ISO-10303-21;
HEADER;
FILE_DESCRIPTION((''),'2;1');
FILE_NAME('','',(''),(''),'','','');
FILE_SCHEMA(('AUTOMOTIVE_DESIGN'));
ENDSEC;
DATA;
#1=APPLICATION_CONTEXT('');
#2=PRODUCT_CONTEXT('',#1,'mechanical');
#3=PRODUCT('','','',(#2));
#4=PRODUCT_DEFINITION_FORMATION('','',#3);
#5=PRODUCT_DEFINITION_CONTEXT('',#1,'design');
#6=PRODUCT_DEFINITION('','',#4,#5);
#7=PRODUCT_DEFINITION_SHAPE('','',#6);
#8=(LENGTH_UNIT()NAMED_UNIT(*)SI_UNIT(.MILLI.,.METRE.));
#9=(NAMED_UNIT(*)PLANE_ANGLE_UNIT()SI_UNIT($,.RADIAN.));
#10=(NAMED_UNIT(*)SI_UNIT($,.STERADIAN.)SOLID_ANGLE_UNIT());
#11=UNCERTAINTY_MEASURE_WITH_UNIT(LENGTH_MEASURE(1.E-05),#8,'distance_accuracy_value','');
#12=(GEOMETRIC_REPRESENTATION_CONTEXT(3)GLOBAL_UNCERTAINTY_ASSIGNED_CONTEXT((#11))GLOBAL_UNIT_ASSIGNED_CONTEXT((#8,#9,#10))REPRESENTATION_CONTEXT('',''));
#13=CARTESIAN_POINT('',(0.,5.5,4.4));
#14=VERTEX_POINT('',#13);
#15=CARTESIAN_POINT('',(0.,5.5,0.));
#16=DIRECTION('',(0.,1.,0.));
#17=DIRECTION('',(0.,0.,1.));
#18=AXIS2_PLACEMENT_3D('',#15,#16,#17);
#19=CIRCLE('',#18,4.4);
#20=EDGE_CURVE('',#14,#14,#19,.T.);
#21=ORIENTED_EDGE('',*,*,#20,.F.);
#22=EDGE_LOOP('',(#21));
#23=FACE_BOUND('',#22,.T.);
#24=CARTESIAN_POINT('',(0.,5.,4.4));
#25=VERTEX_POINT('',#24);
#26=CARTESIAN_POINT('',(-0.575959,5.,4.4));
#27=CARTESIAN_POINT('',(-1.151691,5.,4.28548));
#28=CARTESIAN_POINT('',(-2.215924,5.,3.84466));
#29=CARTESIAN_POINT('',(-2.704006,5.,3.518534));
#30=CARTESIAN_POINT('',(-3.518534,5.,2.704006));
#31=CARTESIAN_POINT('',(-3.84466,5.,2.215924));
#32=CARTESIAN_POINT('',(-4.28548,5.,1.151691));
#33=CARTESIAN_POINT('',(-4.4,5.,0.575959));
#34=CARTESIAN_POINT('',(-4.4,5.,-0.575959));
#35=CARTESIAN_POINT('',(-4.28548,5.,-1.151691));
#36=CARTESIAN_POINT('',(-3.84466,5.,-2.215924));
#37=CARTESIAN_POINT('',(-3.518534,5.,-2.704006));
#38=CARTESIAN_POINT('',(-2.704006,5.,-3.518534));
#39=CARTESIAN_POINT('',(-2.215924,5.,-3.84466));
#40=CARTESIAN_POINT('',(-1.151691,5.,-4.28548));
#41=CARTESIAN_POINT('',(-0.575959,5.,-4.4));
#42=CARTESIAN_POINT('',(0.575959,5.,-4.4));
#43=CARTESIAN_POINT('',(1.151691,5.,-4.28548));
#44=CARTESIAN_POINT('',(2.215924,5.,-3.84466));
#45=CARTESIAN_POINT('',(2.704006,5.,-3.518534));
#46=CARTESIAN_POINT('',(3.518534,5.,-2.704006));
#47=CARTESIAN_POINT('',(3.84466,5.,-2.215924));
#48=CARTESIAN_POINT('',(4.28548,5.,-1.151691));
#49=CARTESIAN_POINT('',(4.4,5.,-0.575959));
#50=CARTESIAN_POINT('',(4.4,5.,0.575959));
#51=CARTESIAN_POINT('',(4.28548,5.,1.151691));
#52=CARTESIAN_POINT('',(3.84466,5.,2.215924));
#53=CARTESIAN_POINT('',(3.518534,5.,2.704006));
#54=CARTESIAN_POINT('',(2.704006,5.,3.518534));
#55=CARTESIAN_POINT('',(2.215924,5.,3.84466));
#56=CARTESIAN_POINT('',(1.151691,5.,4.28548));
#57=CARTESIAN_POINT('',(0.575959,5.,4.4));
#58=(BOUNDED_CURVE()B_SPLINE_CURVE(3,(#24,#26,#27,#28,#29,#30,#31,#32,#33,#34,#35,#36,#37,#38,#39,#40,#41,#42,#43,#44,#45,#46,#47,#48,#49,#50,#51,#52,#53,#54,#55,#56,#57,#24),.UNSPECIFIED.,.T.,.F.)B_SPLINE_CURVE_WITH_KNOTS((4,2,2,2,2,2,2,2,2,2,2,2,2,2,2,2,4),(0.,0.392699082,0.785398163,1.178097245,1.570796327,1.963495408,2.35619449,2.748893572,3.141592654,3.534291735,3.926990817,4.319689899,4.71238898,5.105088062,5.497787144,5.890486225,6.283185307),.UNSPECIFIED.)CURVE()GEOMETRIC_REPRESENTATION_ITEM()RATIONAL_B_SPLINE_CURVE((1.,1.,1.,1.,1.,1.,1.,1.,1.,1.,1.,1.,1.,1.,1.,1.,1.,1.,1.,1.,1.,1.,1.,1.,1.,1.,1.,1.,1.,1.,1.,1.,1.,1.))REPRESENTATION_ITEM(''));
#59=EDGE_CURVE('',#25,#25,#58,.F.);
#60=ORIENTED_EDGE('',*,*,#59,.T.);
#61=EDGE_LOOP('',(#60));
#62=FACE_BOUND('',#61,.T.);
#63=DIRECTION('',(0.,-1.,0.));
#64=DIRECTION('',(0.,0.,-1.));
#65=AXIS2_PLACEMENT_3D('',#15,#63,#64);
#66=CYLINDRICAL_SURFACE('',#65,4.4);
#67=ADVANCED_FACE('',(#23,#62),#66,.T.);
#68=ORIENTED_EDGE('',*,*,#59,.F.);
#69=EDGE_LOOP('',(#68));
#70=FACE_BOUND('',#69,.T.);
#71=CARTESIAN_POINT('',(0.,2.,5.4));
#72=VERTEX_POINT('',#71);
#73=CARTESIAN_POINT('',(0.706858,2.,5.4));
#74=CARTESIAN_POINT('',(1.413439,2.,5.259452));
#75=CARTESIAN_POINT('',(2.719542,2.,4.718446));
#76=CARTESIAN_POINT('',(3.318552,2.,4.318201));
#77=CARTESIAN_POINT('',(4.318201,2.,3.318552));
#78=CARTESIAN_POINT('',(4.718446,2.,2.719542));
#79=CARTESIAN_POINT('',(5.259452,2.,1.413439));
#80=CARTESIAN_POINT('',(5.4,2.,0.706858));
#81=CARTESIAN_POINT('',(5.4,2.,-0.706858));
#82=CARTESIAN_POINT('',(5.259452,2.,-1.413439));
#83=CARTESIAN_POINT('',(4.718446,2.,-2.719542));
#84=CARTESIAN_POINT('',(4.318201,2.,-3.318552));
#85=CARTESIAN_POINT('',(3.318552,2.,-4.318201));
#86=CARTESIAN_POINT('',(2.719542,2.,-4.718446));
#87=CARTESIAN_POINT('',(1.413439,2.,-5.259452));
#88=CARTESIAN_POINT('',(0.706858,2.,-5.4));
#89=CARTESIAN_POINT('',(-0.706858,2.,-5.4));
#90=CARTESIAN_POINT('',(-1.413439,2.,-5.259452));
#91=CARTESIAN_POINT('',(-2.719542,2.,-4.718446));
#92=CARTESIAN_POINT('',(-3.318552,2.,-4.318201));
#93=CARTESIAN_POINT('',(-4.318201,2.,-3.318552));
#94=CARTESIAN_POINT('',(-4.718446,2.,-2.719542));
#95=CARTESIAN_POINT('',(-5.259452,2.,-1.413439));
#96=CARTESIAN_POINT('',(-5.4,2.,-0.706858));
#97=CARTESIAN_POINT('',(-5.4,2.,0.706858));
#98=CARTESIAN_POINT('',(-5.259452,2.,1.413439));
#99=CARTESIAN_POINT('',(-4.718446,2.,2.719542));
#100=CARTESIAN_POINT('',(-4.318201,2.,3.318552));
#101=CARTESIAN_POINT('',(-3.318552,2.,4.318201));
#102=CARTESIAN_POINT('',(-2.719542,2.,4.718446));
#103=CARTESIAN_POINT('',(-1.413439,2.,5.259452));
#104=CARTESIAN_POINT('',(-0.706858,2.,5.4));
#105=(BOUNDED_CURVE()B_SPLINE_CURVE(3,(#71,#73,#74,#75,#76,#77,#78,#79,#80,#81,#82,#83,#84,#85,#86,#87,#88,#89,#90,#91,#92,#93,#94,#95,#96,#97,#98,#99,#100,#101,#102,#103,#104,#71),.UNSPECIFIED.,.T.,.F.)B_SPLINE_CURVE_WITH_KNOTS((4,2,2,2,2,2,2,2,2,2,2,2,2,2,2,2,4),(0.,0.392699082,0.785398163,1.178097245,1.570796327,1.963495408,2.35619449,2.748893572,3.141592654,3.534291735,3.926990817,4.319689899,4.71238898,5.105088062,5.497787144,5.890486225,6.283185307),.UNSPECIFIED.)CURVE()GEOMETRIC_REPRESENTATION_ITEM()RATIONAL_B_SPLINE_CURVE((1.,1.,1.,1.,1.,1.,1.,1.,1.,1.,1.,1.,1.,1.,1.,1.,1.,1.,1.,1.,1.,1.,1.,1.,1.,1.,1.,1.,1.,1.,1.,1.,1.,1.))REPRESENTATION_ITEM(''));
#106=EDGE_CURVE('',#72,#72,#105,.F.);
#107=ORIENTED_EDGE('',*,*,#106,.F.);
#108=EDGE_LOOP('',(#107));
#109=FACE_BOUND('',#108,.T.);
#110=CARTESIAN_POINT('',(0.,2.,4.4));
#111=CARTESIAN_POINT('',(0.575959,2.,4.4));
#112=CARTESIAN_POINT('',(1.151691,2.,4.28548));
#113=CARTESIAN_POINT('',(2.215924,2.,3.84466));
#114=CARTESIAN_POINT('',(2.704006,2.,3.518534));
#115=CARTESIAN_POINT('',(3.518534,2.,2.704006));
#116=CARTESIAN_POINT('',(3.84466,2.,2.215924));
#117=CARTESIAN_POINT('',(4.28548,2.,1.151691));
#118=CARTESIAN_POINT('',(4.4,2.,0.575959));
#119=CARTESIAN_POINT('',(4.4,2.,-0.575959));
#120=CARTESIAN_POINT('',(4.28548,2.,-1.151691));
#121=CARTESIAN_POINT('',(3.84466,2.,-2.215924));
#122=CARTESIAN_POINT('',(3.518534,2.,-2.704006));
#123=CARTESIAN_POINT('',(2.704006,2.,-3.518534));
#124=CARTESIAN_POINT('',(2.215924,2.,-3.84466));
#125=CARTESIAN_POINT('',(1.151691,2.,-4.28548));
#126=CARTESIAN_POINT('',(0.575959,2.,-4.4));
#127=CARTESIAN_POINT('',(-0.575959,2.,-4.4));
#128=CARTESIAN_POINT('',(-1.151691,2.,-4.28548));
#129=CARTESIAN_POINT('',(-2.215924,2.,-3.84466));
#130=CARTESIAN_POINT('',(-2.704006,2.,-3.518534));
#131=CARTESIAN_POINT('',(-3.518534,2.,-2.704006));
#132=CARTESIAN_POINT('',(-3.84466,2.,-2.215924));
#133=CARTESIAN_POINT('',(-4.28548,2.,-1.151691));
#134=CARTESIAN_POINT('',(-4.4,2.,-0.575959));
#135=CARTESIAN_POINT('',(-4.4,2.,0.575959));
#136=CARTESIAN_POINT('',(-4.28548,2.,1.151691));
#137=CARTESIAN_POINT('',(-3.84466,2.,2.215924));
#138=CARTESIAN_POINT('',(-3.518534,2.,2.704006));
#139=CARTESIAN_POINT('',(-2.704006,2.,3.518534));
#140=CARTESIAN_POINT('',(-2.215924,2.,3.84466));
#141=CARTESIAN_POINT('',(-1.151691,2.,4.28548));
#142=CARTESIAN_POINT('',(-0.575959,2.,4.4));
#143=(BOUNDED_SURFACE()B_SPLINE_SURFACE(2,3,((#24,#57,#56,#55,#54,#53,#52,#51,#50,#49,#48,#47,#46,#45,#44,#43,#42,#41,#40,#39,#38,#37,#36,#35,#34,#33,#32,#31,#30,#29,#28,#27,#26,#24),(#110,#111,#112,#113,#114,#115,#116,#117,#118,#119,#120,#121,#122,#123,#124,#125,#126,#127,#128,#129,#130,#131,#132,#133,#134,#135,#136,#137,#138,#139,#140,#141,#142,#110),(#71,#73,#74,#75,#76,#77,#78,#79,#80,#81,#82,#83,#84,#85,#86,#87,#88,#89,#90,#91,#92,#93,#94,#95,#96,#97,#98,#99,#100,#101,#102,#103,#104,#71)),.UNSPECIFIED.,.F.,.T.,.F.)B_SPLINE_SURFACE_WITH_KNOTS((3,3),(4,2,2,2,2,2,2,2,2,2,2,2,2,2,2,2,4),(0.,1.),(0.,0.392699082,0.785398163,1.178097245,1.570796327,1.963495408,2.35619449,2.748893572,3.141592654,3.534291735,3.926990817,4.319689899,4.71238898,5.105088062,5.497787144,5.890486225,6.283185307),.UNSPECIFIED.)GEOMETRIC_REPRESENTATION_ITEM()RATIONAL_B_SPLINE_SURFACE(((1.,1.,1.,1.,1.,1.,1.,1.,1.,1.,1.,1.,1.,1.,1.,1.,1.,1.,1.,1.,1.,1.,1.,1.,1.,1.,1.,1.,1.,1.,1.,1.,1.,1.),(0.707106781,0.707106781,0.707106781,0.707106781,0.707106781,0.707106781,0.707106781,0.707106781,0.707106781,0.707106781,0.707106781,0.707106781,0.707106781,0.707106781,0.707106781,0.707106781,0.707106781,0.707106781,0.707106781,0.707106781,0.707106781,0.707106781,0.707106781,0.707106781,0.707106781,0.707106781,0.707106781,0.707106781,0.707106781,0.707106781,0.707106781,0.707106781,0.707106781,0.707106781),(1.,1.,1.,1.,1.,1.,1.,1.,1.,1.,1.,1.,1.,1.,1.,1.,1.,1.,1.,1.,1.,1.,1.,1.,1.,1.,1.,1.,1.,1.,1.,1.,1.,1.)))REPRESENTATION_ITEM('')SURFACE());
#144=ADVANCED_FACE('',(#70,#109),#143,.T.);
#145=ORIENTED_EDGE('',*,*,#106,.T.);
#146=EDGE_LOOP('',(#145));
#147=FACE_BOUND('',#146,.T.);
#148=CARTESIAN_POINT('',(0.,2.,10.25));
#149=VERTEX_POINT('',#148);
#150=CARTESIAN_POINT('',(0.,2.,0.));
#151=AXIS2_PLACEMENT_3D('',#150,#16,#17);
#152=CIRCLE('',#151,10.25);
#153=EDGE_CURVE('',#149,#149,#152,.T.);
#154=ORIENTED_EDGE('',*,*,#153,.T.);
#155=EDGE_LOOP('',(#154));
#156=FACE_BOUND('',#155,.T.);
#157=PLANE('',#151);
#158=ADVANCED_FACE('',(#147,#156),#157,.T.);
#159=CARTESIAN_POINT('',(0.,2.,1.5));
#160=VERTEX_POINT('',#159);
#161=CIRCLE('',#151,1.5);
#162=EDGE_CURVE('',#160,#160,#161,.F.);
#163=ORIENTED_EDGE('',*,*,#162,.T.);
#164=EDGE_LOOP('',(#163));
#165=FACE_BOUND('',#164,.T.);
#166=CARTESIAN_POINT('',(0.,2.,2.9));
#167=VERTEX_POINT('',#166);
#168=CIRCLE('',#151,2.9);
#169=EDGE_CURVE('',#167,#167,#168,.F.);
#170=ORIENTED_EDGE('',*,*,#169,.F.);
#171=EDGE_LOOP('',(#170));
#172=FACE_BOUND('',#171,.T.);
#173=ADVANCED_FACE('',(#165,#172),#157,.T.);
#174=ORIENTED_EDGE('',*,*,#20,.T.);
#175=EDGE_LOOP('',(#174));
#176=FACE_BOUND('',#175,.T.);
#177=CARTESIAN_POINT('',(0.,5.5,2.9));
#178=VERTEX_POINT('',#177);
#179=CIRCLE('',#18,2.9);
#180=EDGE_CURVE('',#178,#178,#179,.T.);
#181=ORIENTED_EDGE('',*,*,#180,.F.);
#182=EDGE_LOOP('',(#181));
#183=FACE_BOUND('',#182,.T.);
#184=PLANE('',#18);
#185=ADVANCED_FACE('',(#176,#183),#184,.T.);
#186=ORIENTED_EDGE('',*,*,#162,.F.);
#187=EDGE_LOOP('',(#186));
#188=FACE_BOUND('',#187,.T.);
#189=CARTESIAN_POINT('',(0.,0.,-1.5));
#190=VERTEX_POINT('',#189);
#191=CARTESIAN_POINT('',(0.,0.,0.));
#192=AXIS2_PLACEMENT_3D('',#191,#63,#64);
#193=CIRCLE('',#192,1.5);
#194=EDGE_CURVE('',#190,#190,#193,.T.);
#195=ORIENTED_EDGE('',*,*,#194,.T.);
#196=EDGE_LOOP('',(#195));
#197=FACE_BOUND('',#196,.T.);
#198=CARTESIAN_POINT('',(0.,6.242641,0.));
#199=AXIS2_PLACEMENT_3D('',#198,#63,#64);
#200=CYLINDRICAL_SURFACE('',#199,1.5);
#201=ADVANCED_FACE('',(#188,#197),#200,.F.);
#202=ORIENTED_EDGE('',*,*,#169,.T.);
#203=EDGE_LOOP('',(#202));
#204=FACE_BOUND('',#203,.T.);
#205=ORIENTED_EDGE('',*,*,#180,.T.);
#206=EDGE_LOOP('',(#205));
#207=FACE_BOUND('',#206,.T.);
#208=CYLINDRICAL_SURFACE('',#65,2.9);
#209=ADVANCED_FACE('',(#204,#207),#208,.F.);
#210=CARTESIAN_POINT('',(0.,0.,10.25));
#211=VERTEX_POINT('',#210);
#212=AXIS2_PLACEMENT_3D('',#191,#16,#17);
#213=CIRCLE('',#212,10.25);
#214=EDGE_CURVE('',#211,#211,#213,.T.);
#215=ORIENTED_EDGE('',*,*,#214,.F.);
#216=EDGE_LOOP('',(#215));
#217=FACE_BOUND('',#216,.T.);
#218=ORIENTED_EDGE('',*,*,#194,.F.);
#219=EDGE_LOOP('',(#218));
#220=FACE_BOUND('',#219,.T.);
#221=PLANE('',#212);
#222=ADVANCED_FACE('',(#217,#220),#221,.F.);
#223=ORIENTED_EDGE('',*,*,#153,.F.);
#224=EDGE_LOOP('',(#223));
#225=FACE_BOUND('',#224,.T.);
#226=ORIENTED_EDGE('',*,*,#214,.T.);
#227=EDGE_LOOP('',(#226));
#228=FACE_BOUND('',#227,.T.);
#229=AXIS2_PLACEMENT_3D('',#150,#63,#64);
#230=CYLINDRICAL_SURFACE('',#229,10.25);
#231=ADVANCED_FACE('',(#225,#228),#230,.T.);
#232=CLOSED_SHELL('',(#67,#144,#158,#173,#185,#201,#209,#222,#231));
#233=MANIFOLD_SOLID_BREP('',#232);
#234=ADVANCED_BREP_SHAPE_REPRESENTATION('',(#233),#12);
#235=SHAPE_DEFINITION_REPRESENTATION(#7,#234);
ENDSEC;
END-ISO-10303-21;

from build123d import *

# Parameters (mm, degrees)
SKETCH1_R           = 10.25
BOSS_EXTRUDE1_DEPTH = 2
SKETCH2_R           = 4.4
SKETCH2_R_2         = 2.9
BOSS_EXTRUDE2_DEPTH = 3.5
FILLET1_SIZE        = 1
FILLET1_SIZE_2      = 3
SKETCH3_R           = 1.5
CUT_EXTRUDE1_DEPTH  = 2


with BuildPart() as part:
    # Sketch1 → Boss-Extrude1 (new body)
    with BuildSketch(Plane(origin=(0, 0, 0), x_dir=(1, 0, 0), z_dir=(0, 1, 0))):
        with Locations(Location((0, 0, 0), (0, 0, 270))):
            Circle(SKETCH1_R)
    extrude(amount=BOSS_EXTRUDE1_DEPTH)

    # Sketch2 → Boss-Extrude2 (add)
    with BuildSketch(Plane(origin=(0, 2, 0), x_dir=(1, 0, 0), z_dir=(0, 1, 0))):
        with Locations(Location((0, 0, 0), (0, 0, 270))):
            Circle(SKETCH2_R)
        with Locations(Location((0, 0, 0), (0, 0, 270))):
            Circle(SKETCH2_R_2, mode=Mode.SUBTRACT)
    extrude(amount=BOSS_EXTRUDE2_DEPTH)

    # Fillet1
    # an asymmetric fillet: 3, 1 mm, written as the material it adds along each edge
    with BuildSketch(Plane(origin=(0, 2, 0), x_dir=(0, 0, 1), z_dir=(-1, 0, 0))) as fillet1_piece_1:
        with BuildLine():
            Bezier((4.4 + FILLET1_SIZE, 0), (4.4, 0), (4.4, FILLET1_SIZE_2), weights=[1, 0.707106781, 1])
            Line((4.4, FILLET1_SIZE_2), (4.4, 0))
            Line((4.4, 0), (4.4 + FILLET1_SIZE, 0))
        make_face()
    revolve(axis=Axis((0, 2, 0), (0, 1, 0)))

    # Sketch3 → Cut-Extrude1 (cut)
    with BuildSketch(Plane.XZ):
        with Locations(Location((0, 0, 0), (0, 0, 270))):
            Circle(SKETCH3_R)
    extrude(amount=-CUT_EXTRUDE1_DEPTH, mode=Mode.SUBTRACT)


solid = part.part
